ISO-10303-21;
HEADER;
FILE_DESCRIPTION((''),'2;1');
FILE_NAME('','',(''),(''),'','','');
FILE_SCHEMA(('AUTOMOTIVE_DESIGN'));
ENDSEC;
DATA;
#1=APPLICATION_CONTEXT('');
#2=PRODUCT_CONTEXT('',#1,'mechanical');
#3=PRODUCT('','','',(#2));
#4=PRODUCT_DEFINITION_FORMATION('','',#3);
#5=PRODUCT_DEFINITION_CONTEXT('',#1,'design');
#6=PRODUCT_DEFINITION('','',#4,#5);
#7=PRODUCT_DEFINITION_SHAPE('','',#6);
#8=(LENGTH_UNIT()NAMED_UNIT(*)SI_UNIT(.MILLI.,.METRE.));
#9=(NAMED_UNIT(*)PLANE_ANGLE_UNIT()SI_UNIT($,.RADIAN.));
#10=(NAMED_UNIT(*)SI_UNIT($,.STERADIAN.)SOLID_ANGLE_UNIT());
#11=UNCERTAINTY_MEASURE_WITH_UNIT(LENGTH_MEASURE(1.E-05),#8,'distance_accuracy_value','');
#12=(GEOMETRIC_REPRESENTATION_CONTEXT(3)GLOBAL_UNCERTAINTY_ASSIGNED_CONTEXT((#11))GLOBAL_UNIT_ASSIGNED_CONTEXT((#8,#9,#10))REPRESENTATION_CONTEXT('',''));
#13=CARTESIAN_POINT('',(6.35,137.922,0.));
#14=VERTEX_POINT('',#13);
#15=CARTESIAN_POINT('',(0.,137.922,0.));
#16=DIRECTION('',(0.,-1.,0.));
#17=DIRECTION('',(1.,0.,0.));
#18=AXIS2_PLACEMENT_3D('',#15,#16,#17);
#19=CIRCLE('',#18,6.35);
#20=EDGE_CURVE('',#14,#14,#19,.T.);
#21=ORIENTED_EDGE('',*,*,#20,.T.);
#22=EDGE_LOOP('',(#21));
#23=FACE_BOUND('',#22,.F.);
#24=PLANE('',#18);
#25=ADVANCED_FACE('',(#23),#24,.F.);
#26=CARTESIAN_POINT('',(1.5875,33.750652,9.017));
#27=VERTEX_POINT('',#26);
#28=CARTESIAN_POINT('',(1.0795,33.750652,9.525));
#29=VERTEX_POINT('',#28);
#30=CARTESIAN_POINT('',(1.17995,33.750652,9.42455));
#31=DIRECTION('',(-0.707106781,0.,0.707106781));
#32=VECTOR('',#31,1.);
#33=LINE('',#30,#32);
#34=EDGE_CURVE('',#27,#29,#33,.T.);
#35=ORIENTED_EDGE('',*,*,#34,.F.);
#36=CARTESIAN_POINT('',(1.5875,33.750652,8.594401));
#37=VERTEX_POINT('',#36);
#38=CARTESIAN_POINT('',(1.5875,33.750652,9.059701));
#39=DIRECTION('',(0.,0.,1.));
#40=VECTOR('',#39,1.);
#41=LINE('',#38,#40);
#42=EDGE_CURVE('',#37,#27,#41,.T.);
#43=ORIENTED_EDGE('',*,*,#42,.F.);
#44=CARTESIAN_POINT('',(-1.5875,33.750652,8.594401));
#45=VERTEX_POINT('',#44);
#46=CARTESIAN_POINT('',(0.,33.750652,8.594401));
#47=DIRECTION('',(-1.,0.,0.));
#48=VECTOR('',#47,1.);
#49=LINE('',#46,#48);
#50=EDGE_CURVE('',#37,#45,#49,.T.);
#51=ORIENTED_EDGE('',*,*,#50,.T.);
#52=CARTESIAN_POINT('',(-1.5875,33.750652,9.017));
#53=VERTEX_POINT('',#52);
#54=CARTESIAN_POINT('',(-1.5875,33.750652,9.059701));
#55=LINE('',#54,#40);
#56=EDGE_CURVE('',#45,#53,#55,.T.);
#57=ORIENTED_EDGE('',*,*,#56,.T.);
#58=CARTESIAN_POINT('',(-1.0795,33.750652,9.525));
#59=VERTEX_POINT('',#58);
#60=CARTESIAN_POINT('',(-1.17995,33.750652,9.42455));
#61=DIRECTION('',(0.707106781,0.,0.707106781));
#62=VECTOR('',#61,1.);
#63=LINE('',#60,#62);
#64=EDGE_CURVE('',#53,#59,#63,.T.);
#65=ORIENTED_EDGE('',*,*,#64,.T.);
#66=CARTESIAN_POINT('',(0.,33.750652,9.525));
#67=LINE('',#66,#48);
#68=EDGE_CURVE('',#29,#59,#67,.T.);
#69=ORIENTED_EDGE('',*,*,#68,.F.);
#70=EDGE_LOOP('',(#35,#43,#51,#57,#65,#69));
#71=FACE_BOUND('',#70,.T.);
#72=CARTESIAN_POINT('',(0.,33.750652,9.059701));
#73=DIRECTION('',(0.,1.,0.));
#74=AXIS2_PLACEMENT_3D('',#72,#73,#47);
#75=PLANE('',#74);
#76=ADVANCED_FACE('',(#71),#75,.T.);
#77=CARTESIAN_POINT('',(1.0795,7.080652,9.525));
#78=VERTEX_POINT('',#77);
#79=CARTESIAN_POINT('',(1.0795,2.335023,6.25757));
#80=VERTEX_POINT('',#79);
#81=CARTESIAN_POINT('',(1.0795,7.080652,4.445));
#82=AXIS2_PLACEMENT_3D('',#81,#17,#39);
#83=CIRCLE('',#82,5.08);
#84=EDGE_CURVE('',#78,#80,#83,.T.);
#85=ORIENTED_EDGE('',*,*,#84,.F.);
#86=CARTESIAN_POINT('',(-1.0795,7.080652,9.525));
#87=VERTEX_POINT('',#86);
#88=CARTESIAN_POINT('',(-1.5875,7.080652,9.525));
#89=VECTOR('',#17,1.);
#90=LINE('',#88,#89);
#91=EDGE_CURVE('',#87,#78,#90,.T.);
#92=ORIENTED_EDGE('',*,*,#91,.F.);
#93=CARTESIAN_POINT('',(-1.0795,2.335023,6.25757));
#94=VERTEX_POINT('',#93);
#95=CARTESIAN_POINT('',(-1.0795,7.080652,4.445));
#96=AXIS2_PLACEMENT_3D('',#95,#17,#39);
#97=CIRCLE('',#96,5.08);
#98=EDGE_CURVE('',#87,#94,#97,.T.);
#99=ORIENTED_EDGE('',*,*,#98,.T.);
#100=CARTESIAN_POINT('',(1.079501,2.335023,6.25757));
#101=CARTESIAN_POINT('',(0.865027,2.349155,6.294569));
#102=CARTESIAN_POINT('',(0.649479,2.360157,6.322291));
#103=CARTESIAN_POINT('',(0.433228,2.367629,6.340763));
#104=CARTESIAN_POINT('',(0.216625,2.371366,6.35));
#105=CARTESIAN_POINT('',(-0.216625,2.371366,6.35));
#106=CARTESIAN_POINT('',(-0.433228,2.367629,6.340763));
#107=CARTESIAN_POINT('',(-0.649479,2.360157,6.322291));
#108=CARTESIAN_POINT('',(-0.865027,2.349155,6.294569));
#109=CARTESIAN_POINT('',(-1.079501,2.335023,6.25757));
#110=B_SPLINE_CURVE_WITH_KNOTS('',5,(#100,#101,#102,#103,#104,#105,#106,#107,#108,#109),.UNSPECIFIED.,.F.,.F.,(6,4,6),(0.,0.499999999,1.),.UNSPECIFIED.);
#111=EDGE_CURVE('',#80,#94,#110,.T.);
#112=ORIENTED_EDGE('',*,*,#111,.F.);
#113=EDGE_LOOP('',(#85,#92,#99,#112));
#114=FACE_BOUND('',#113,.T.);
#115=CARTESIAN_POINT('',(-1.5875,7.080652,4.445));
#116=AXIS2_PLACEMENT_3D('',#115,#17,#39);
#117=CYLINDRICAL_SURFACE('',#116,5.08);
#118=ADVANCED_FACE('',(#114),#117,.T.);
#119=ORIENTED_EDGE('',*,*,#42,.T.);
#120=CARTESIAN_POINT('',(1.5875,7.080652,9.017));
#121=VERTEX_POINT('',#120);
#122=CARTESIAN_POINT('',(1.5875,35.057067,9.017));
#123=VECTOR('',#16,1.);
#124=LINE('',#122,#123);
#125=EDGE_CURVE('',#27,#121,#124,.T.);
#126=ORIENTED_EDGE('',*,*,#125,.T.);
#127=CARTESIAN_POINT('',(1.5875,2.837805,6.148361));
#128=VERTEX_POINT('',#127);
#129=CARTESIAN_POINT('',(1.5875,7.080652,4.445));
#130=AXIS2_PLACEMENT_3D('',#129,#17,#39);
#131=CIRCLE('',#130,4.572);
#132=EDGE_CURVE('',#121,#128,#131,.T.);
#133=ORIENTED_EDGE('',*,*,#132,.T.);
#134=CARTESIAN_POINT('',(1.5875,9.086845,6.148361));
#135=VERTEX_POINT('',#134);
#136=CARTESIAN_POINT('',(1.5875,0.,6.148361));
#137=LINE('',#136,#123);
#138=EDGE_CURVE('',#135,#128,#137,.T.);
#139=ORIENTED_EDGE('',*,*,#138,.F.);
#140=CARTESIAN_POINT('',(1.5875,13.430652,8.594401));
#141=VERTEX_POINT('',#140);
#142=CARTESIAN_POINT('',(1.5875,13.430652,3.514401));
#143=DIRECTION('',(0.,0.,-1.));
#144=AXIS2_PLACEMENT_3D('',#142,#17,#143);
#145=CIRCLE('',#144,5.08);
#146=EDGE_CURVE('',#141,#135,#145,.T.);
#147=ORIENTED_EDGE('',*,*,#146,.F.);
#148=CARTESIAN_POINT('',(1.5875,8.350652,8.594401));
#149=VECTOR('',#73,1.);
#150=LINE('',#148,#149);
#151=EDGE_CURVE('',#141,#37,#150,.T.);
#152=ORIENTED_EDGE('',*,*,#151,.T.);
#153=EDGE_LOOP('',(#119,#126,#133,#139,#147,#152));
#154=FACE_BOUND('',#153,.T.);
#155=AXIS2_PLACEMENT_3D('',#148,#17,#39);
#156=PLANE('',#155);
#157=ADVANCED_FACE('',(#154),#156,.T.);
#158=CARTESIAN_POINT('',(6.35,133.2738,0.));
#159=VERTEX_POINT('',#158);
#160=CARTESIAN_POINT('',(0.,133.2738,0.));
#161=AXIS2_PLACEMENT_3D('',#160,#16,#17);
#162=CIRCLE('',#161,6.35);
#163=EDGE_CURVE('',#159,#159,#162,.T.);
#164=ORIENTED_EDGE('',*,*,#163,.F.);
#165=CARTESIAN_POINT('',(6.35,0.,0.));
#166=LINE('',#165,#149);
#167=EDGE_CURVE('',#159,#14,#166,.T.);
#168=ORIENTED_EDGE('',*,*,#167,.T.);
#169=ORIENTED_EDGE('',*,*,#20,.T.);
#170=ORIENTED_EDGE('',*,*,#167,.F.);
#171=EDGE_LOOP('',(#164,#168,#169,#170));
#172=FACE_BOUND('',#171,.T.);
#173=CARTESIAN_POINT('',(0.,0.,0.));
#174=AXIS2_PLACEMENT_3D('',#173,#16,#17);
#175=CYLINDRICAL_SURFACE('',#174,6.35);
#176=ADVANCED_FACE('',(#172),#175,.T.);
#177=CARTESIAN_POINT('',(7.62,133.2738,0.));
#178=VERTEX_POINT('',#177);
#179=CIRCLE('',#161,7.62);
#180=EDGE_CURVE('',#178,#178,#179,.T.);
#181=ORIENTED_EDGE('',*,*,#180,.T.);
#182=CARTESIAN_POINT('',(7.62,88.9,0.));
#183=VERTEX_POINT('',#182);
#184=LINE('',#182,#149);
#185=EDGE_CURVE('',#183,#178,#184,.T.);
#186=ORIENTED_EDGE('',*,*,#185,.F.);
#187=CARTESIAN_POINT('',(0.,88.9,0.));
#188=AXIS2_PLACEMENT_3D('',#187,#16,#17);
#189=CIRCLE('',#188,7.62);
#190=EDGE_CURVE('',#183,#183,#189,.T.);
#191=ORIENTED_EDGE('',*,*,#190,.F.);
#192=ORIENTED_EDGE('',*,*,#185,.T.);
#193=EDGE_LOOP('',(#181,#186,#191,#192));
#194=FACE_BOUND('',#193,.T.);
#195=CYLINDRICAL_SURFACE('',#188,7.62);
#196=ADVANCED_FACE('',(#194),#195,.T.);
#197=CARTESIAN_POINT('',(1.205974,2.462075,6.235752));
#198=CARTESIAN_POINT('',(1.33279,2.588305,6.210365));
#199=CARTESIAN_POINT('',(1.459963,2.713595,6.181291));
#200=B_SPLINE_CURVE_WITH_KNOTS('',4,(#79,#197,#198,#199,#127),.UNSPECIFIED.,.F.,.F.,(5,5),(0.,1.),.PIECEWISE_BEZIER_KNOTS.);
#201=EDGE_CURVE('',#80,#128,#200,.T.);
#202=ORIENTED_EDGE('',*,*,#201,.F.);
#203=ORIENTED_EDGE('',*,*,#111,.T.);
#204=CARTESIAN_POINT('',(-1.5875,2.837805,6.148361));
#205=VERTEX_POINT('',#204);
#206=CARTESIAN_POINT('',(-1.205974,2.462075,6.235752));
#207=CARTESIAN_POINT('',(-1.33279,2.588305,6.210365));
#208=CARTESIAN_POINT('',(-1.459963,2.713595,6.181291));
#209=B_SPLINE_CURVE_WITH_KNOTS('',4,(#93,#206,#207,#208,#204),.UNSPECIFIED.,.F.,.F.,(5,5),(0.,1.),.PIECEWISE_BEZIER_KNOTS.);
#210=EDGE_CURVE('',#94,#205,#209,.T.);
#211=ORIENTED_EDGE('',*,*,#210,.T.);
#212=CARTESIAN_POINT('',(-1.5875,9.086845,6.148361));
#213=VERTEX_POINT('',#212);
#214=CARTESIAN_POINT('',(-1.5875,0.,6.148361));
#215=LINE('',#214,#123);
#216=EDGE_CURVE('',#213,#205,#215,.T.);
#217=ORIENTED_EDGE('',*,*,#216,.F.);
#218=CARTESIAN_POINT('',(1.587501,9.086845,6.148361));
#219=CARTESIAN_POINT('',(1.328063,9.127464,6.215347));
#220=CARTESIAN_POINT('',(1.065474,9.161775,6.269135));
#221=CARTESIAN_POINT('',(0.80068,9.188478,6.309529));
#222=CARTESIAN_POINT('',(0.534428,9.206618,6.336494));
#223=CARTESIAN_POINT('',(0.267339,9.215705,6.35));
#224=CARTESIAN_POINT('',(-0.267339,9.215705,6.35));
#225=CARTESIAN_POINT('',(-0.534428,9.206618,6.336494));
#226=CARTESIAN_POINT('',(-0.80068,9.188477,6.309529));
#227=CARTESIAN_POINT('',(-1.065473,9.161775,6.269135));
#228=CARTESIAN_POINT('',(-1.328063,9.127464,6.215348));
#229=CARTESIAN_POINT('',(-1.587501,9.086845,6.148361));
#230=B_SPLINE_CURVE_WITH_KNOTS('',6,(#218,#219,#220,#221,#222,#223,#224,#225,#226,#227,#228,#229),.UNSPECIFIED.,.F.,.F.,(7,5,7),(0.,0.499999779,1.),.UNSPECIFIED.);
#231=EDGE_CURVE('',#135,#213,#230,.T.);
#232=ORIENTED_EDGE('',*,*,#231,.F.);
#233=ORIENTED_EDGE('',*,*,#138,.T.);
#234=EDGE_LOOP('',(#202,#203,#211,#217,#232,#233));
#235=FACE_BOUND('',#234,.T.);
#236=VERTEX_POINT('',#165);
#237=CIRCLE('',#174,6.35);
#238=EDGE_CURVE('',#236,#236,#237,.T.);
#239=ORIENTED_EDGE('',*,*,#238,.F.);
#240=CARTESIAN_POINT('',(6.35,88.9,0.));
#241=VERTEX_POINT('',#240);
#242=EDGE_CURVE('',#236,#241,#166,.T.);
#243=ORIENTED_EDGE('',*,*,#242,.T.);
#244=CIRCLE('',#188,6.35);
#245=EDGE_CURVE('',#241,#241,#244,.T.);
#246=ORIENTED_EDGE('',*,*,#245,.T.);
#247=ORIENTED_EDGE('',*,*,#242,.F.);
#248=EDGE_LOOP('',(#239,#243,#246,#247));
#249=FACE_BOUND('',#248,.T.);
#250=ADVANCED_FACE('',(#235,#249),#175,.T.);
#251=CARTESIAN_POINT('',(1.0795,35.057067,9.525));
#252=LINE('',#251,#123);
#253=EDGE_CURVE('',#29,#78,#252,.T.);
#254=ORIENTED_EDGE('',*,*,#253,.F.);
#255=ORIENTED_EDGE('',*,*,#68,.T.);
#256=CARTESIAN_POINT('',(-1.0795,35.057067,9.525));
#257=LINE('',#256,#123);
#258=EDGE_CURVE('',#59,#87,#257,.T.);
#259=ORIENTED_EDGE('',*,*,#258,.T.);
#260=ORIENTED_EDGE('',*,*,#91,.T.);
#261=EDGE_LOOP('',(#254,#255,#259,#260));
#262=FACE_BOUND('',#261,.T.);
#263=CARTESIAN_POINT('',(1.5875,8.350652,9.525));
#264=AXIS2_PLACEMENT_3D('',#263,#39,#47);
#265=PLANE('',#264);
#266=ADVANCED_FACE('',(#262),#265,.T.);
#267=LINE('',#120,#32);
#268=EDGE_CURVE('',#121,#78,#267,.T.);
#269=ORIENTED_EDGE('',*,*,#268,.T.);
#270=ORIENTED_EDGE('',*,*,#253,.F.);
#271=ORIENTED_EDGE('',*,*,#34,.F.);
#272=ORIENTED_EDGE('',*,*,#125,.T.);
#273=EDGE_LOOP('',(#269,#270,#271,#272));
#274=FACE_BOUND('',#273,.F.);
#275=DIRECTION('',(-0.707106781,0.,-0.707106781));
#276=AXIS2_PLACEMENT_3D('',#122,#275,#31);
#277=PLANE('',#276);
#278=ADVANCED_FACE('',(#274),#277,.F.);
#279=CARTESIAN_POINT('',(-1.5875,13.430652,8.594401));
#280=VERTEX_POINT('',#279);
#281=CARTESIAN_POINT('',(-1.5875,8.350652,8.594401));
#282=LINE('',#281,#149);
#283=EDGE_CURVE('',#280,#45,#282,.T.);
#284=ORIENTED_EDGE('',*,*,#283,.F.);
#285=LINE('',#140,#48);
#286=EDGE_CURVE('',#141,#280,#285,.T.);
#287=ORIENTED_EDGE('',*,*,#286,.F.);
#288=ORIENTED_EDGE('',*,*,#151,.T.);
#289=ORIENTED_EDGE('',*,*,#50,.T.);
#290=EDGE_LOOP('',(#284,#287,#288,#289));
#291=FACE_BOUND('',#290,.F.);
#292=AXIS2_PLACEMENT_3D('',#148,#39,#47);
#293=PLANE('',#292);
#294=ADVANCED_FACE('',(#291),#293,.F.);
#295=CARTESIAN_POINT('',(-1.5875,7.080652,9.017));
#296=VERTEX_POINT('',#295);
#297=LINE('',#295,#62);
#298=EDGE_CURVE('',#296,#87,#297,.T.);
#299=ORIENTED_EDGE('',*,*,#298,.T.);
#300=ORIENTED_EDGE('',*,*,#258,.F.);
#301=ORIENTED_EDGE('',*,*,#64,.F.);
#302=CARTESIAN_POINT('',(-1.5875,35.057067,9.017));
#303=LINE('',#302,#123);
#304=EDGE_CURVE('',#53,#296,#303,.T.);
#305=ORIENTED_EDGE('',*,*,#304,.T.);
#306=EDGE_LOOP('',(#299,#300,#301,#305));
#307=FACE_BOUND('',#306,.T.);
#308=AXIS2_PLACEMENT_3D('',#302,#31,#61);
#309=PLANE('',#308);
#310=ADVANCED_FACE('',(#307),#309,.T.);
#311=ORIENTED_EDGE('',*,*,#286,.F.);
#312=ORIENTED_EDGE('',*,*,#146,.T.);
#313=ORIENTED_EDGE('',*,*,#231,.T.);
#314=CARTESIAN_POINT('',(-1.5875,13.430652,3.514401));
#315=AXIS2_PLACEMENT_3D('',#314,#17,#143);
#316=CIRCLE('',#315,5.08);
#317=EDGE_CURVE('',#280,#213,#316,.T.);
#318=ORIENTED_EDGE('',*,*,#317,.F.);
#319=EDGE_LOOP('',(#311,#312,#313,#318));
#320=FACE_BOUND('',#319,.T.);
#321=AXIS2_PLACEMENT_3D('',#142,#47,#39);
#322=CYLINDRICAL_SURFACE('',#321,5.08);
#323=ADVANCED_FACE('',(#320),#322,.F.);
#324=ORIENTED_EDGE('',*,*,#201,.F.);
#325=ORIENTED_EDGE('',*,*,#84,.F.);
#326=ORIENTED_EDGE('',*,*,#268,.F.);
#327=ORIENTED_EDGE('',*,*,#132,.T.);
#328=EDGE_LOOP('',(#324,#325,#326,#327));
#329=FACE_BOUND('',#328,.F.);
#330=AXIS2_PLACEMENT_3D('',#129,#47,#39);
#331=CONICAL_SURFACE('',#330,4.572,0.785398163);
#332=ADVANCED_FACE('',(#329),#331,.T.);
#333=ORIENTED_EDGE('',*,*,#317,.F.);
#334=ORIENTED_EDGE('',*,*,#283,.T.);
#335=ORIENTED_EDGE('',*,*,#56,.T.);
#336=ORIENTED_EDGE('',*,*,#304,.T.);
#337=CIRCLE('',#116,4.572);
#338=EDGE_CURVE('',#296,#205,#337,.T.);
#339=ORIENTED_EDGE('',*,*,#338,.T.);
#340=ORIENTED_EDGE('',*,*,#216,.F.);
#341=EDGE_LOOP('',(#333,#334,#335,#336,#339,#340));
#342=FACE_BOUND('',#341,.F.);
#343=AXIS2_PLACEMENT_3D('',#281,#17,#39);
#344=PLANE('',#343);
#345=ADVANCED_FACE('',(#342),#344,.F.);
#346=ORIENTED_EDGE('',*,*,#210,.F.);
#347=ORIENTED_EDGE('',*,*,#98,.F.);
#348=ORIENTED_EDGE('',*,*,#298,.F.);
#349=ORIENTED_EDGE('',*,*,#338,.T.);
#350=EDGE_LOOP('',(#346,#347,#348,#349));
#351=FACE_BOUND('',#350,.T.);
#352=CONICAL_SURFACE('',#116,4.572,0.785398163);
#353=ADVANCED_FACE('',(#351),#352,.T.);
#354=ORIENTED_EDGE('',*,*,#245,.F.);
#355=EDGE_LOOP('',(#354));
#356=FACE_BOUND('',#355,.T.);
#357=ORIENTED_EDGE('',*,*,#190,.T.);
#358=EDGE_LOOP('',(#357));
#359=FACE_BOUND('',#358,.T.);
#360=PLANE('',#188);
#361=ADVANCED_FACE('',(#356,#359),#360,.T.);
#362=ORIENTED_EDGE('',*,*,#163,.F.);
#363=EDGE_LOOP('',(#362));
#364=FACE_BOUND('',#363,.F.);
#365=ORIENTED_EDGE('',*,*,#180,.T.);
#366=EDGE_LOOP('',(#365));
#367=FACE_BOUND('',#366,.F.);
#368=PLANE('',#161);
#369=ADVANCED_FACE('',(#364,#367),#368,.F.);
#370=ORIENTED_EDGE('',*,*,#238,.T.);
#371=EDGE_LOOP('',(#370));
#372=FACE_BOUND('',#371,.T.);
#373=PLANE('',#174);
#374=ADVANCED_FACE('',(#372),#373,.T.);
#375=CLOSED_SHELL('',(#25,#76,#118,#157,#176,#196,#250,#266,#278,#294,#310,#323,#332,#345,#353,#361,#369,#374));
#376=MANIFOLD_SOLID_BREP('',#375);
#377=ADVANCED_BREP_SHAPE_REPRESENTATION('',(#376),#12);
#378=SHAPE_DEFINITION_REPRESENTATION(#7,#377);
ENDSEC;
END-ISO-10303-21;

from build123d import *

# Parameters (mm, degrees)
F2_W        = 3.175
F2_H        = 6.35
F3_DEPTH    = 9.525
F4_W        = 3.175
F4_H        = 0.9305988193
F5_DEPTH    = 25.4
F6_R        = 5.08
F7_T1_DEPTH = 27.9764149579
F7_T4_ANGLE = 90
F7_T6_ANGLE = 90
F9_R        = 6.35
F10_DEPTH   = 137.922
F11_R       = 7.62
F12_DEPTH   = 44.3738


# Not quite as in the source:
# - a fillet or chamfer that OpenCascade refuses, or shapes differently, is made with other operations: its cross-section is extruded or revolved along the edge and cut away or added
# - the program builds the solid bodies; features that only make, move or delete a surface that nothing else refers to are left out


with BuildPart() as f3:
    # F2 (on Top) → F3 (new body)
    with BuildSketch(Plane.XY):
        with Locations((0, 5.175651788)):
            Rectangle(F2_W, F2_H)
    extrude(amount=F3_DEPTH)

    # F4 (on face) → F5 (join)
    with BuildSketch(Plane(origin=(0, 8.350651788, 0), x_dir=(-1, 0, 0), z_dir=(0, 1, 0))):
        with Locations((0, 9.0597005904)):
            Rectangle(F4_W, F4_H)
    extrude(amount=F5_DEPTH)

    # F6
    f6_edges = [f3.edges().sort_by_distance(p)[0] for p in [
        (0, 8.350652, 8.594401),
        (0, 2.000652, 9.525),
    ]]
    fillet(f6_edges, radius=F6_R)

    # F7: chamfer of 0.508 on 2 edges, made by hand

    # F7_s2 → F7_t1 (cut)
    with BuildSketch(Plane.XZ.offset(-35.0570667459)):
        Polygon((1.5875, 9.017), (1.0795, 9.525), (1.5875, 9.525), align=None)
        Polygon((-1.5875, 9.017), (-1.0795, 9.525), (-1.5875, 9.525), align=None)
    extrude(amount=F7_T1_DEPTH, mode=Mode.SUBTRACT)

    # F7_s3 → F7_t4 (revolve, cut)
    with BuildSketch(Plane.XZ.offset(-7.080651788)):
        Polygon((-1.5875, 9.017), (-1.0795, 9.525), (-1.5875, 9.525), align=None)
    revolve(axis=Axis((-1.5875, 7.080651788, 4.445), (1, 0, 0)), revolution_arc=F7_T4_ANGLE, mode=Mode.SUBTRACT)

    # F7_s5 → F7_t6 (revolve, cut)
    with BuildSketch(Plane.XZ.offset(-7.080651788)):
        Polygon((1.5875, 9.017), (1.0795, 9.525), (1.5875, 9.525), align=None)
    revolve(axis=Axis((1.5875, 7.080651788, 4.445), (1, 0, 0)), revolution_arc=F7_T6_ANGLE, mode=Mode.SUBTRACT)

    # F9 (on Front) → F10 (join)
    with BuildSketch(Plane.XZ):
        Circle(F9_R)
    extrude(amount=-F10_DEPTH)

    # F11 (on face) → F12 (join)
    with BuildSketch(Plane.XZ.offset(-88.9)):
        Circle(F11_R)
    extrude(amount=-F12_DEPTH)


solid = f3.part
